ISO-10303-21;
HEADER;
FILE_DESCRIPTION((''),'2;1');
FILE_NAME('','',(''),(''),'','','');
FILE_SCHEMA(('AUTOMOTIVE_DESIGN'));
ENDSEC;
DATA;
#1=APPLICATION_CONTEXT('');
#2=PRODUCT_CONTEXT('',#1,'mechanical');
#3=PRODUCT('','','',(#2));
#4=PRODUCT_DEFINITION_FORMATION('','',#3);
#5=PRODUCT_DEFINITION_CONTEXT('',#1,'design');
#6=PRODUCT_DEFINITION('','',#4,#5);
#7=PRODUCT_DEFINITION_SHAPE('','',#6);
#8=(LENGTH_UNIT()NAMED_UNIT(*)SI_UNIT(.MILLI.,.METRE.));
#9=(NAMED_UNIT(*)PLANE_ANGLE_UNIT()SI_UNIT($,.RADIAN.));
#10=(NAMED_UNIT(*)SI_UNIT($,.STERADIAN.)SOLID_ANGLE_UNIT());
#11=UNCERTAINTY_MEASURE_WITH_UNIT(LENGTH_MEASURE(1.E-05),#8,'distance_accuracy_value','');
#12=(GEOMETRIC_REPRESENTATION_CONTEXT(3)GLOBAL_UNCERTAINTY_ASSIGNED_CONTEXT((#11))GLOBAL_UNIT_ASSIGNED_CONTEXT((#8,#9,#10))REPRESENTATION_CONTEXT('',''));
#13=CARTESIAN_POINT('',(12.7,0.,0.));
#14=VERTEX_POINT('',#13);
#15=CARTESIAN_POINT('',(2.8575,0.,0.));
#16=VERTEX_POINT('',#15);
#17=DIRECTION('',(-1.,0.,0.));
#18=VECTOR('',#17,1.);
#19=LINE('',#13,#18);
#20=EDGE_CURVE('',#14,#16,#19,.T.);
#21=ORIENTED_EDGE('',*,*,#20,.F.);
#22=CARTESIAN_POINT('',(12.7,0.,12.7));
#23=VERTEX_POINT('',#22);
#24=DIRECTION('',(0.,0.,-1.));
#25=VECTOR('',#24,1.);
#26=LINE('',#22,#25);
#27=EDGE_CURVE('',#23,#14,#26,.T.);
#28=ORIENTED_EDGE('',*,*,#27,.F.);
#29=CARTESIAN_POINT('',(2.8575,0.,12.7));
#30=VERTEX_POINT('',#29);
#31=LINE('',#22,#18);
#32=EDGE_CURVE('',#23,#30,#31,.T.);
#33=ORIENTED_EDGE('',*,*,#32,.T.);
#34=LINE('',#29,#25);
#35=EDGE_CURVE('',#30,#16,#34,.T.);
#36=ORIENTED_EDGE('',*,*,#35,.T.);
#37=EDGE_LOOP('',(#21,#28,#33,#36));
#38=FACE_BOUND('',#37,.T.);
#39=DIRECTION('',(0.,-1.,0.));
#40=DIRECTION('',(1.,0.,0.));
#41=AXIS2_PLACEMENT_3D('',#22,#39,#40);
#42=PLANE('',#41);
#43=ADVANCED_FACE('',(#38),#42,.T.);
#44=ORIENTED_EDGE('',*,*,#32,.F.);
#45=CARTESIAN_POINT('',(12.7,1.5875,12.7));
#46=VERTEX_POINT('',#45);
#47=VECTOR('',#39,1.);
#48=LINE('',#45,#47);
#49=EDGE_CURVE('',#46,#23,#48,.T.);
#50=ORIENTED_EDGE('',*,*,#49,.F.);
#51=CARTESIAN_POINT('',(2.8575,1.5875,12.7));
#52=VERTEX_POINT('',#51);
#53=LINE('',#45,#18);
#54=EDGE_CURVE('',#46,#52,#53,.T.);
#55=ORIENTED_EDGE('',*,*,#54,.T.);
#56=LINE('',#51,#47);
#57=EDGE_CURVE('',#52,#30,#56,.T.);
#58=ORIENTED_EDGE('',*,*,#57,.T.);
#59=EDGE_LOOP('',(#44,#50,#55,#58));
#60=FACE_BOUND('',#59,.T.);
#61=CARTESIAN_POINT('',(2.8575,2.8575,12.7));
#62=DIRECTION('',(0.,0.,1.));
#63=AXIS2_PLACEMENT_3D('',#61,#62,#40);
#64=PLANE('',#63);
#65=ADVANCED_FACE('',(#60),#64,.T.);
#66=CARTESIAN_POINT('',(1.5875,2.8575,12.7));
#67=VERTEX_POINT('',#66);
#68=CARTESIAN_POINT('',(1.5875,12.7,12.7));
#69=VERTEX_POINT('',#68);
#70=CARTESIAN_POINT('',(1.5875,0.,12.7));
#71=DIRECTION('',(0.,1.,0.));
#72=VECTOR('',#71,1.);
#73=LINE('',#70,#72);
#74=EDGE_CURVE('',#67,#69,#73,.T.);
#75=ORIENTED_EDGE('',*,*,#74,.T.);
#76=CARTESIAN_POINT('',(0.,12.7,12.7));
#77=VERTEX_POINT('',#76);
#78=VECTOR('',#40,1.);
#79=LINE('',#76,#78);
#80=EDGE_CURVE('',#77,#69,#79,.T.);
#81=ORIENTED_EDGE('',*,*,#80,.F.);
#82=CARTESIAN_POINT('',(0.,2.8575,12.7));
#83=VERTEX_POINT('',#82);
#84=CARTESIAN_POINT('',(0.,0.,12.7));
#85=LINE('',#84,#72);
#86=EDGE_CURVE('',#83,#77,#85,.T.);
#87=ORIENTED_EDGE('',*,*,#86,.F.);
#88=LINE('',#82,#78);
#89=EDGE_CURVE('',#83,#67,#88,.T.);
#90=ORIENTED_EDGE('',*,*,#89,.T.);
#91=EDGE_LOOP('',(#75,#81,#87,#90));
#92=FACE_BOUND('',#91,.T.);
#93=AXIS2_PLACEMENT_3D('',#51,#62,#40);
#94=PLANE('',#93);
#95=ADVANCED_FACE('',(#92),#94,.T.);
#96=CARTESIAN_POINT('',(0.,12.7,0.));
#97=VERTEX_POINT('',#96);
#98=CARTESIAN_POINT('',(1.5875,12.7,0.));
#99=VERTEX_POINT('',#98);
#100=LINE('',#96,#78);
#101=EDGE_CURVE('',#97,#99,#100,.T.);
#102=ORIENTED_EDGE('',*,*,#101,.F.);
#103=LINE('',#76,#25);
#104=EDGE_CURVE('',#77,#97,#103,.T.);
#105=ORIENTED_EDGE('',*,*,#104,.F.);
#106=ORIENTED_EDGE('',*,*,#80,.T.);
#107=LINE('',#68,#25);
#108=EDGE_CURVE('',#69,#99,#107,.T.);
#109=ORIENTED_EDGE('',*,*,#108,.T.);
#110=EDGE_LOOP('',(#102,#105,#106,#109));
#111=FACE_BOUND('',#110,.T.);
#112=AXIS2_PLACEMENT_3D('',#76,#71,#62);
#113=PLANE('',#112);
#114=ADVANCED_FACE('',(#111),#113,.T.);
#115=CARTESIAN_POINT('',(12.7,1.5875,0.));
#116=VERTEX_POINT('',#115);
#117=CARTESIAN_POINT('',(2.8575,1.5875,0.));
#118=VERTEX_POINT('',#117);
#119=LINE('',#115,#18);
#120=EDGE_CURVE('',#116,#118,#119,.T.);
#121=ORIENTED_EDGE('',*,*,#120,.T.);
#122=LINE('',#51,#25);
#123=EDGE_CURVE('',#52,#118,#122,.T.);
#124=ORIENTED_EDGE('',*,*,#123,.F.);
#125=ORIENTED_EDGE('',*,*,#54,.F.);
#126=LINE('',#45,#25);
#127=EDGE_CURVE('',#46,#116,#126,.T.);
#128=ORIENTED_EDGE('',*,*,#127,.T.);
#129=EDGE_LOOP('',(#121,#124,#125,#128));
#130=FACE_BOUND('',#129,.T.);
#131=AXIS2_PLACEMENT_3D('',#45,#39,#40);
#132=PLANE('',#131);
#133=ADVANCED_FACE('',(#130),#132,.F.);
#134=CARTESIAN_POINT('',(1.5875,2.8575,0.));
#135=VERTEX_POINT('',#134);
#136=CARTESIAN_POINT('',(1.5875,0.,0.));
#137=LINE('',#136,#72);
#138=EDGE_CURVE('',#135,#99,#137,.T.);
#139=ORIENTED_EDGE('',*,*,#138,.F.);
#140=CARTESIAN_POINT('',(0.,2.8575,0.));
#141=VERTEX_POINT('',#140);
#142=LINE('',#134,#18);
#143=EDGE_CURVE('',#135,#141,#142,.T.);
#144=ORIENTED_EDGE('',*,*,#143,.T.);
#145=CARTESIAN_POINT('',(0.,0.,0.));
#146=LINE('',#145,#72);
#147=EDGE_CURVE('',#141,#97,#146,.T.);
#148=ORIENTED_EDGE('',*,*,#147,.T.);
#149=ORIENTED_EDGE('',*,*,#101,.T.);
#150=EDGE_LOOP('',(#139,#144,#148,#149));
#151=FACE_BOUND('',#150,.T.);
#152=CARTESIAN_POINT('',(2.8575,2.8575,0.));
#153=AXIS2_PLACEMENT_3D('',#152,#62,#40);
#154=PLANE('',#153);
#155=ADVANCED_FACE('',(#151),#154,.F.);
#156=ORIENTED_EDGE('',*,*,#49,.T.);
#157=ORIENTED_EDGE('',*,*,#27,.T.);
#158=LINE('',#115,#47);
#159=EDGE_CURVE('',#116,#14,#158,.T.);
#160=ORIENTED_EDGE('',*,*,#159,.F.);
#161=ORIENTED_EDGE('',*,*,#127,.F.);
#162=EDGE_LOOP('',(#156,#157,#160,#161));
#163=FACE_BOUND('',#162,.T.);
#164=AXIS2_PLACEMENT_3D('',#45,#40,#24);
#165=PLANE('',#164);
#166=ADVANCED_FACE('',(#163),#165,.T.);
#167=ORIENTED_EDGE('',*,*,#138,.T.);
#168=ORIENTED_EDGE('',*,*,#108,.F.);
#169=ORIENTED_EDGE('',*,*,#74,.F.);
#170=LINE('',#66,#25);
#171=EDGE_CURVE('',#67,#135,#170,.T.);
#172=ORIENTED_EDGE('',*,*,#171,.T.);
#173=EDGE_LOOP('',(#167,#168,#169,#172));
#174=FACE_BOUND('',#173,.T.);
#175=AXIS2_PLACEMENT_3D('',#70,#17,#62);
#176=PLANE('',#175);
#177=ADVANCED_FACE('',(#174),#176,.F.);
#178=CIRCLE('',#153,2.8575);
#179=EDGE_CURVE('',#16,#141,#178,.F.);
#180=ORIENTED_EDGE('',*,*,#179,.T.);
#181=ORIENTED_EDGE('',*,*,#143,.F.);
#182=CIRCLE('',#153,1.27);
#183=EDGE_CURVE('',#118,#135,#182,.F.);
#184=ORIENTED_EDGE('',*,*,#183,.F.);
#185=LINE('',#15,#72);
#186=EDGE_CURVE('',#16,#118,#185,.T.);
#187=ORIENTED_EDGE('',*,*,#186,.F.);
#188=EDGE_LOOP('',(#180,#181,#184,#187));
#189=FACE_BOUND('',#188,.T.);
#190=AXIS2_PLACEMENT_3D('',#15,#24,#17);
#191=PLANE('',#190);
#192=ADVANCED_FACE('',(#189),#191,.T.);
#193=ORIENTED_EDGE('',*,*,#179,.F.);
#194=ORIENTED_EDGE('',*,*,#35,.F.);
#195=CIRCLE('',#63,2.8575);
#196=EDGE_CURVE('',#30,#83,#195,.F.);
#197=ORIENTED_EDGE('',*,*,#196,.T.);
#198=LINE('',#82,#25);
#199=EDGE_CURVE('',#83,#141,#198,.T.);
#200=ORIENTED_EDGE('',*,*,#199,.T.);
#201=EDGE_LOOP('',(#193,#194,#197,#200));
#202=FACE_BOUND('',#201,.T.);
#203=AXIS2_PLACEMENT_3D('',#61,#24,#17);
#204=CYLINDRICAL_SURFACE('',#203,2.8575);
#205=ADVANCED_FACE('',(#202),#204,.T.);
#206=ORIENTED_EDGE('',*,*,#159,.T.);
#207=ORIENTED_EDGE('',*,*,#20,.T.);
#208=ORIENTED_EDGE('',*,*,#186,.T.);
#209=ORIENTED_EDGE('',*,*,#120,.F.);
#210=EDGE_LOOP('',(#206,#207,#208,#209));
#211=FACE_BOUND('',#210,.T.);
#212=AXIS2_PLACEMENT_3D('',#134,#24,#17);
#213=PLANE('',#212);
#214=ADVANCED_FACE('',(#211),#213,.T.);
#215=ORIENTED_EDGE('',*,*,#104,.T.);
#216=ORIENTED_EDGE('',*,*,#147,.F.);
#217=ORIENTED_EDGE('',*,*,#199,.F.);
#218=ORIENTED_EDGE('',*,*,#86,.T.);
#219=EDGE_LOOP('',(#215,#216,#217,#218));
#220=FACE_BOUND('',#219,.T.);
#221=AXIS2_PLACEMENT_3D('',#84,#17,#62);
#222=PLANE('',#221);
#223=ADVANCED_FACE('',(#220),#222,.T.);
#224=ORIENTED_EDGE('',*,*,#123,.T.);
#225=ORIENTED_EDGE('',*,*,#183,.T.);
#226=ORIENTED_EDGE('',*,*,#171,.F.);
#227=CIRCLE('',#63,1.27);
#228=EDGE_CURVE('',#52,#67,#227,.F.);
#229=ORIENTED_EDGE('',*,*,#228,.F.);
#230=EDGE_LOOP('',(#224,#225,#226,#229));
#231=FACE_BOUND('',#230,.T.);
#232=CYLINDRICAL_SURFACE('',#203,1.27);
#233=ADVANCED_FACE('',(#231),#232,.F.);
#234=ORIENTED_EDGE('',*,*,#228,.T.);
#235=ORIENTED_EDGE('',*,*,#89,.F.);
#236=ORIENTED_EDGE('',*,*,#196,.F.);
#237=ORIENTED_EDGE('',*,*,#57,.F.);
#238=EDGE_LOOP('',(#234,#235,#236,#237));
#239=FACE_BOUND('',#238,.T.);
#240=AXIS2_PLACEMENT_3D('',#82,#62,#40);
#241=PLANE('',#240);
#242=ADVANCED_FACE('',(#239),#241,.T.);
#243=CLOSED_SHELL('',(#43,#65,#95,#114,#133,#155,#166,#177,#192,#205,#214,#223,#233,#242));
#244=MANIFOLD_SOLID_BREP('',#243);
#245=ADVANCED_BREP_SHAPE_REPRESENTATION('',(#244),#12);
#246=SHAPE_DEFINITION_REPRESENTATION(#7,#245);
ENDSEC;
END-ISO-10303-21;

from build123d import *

# Parameters (mm, degrees)
BASE_FLANGE1_DEPTH = 12.7


# Sheet-metal steps are written as plain solids
with BuildPart() as part:
    # Sketch1 → Base-Flange1 (new body)
    with BuildSketch(Plane.XY):
        with BuildLine():
            Line((12.7, 0), (2.8575, 0))
            ThreePointArc((2.8575, 0), (0.836942373, 0.836942373), (0, 2.8575))
            Line((0, 2.8575), (0, 12.7))
            Line((0, 12.7), (1.5875, 12.7))
            Line((1.5875, 12.7), (1.5875, 2.8575))
            ThreePointArc((1.5875, 2.8575), (1.959474388, 1.959474388), (2.8575, 1.5875))
            Line((2.8575, 1.5875), (12.7, 1.5875))
            Line((12.7, 1.5875), (12.7, 0))
        make_face()
    extrude(amount=BASE_FLANGE1_DEPTH)


solid = part.part
